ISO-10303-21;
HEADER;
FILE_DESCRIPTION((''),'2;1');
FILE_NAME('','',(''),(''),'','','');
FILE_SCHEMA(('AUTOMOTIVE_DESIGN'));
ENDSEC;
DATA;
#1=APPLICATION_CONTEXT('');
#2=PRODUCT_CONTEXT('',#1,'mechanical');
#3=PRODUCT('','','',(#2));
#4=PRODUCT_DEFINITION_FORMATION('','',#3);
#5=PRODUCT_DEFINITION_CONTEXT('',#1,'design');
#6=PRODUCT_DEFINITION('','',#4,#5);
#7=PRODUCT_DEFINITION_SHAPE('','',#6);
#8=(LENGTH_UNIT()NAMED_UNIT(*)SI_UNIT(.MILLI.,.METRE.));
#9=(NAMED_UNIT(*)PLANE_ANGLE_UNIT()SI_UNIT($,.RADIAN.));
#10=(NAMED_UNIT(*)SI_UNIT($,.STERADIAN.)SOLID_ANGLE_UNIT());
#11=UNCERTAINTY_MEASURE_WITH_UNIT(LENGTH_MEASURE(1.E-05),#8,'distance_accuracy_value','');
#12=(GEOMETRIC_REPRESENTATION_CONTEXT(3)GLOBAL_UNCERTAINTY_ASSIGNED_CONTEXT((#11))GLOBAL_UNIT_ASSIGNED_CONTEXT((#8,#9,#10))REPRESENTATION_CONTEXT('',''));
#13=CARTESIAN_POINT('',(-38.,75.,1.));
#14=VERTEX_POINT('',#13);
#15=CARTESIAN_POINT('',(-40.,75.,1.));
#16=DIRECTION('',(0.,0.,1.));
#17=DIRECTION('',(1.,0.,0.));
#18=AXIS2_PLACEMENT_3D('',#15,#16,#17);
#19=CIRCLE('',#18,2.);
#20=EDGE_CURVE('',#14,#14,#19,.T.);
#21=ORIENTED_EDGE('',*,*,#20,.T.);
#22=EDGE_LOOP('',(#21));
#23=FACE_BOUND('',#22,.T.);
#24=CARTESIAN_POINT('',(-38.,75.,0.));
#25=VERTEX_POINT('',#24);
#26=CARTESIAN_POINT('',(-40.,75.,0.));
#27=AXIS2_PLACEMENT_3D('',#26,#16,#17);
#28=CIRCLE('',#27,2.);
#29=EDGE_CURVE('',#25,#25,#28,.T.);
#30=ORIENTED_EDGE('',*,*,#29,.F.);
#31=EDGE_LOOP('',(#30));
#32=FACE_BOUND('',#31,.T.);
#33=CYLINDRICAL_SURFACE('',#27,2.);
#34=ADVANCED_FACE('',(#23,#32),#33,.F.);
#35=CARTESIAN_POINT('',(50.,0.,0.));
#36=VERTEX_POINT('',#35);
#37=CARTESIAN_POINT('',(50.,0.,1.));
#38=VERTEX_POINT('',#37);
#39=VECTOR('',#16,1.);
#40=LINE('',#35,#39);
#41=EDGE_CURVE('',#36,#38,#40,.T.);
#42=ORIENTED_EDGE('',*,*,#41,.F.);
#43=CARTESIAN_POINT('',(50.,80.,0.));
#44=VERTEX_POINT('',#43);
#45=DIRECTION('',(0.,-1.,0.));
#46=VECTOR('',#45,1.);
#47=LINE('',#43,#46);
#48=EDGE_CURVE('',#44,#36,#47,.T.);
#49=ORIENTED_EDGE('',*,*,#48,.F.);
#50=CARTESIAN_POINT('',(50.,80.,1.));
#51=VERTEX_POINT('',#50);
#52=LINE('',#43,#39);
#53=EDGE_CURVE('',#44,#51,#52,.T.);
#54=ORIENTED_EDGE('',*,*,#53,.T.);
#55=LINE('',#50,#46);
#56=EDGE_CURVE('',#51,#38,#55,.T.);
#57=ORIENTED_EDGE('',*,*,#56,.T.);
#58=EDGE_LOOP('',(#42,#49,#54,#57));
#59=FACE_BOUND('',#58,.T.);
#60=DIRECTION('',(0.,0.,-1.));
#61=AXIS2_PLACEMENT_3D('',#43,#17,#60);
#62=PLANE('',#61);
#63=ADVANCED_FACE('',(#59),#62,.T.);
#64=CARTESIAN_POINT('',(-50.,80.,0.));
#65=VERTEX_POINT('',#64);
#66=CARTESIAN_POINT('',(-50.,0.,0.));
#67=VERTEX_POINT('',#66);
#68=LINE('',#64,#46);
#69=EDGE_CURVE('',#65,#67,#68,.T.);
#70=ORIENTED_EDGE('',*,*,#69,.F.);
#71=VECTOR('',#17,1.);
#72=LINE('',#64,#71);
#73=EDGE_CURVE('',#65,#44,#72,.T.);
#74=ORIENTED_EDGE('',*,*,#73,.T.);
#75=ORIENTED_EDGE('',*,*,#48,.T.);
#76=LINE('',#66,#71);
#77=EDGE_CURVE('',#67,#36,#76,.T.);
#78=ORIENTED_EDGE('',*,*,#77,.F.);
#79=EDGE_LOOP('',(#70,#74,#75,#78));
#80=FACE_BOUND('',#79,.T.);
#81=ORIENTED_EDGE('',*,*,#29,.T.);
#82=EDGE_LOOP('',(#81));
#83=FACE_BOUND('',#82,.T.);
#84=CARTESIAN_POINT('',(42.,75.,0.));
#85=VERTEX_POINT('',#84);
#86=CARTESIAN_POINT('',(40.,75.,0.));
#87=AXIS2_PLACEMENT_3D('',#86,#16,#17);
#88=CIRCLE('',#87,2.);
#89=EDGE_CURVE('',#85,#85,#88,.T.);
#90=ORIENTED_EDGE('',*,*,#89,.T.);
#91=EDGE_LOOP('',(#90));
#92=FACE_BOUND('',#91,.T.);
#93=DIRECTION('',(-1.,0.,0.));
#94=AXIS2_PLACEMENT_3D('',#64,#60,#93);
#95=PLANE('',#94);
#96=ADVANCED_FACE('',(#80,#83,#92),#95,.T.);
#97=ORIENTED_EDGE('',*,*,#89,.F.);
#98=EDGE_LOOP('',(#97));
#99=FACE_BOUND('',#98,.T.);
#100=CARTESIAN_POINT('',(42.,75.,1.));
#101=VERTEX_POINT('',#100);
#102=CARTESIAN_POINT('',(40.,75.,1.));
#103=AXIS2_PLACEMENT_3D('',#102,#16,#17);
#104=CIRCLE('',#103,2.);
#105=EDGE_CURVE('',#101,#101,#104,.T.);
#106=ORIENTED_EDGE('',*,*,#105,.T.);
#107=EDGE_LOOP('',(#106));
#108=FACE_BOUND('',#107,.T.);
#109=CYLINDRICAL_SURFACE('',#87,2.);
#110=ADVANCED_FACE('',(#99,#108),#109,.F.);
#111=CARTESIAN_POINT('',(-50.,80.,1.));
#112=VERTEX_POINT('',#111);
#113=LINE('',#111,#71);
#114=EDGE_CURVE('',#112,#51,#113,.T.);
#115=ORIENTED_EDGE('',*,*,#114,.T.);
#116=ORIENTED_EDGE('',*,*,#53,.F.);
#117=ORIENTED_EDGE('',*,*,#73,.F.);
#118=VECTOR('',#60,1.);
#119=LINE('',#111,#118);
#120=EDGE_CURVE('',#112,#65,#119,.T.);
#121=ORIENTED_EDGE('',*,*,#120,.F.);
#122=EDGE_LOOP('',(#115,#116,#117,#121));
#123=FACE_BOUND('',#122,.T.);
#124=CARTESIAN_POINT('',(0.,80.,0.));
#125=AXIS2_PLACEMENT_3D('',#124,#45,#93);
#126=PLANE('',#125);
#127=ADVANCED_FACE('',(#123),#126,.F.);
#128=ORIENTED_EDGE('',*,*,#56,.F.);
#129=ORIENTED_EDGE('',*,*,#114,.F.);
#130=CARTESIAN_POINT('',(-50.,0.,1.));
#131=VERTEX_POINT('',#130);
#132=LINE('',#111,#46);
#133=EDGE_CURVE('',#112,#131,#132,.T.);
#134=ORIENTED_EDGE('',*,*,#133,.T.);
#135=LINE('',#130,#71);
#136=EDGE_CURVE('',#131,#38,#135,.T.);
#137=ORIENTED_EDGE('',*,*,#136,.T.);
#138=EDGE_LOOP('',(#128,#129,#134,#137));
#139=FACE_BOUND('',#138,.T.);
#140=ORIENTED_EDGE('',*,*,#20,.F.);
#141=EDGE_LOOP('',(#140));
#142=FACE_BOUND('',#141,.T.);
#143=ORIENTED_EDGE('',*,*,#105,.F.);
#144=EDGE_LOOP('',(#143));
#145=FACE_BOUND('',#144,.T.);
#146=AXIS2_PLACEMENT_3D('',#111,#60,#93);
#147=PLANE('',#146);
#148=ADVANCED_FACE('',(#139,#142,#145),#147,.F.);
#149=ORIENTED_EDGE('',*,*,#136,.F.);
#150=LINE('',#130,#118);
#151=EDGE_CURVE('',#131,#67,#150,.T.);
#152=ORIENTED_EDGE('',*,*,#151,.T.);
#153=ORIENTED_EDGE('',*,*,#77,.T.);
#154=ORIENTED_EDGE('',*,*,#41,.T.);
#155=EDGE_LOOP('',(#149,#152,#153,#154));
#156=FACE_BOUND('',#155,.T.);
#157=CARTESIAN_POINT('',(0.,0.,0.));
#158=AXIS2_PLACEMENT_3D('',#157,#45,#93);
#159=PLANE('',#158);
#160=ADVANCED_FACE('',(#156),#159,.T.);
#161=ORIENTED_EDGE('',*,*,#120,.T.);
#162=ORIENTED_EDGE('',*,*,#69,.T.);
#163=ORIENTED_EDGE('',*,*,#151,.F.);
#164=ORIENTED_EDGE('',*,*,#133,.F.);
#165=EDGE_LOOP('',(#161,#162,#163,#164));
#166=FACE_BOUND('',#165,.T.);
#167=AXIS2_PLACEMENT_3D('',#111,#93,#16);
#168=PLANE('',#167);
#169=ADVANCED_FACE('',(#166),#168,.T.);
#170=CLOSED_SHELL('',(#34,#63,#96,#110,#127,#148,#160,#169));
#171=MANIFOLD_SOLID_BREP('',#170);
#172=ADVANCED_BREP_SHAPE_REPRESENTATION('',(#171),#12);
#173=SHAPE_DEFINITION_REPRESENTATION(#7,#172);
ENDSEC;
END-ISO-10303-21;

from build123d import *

# Parameters (mm, degrees)
ESQUISSE1_W               = 100
ESQUISSE1_H               = 1
T_LE_DE_BASE_PLI_E1_DEPTH = 80
ESQUISSE6_R               = 2
ENL_V_MAT_EXTRU_1_DEPTH   = 95.345111161


# Sheet-metal steps are written as plain solids
with BuildPart() as part:
    # Esquisse1 → Tôle de base pliée1 (new body)
    with BuildSketch(Plane(origin=(0, 0, 0), x_dir=(1, 0, 0), z_dir=(0, 1, 0))):
        with Locations((0, -0.5)):
            Rectangle(ESQUISSE1_W, ESQUISSE1_H)
    extrude(amount=T_LE_DE_BASE_PLI_E1_DEPTH)

    # Esquisse6 → Enlèv. mat.-Extru.1 (cut, through all)
    with BuildSketch(Plane.XY.offset(1)):
        with Locations((-40, 75)):
            Circle(ESQUISSE6_R)
        with Locations((40, 75)):
            Circle(ESQUISSE6_R)
    extrude(amount=-ENL_V_MAT_EXTRU_1_DEPTH, mode=Mode.SUBTRACT)


solid = part.part
